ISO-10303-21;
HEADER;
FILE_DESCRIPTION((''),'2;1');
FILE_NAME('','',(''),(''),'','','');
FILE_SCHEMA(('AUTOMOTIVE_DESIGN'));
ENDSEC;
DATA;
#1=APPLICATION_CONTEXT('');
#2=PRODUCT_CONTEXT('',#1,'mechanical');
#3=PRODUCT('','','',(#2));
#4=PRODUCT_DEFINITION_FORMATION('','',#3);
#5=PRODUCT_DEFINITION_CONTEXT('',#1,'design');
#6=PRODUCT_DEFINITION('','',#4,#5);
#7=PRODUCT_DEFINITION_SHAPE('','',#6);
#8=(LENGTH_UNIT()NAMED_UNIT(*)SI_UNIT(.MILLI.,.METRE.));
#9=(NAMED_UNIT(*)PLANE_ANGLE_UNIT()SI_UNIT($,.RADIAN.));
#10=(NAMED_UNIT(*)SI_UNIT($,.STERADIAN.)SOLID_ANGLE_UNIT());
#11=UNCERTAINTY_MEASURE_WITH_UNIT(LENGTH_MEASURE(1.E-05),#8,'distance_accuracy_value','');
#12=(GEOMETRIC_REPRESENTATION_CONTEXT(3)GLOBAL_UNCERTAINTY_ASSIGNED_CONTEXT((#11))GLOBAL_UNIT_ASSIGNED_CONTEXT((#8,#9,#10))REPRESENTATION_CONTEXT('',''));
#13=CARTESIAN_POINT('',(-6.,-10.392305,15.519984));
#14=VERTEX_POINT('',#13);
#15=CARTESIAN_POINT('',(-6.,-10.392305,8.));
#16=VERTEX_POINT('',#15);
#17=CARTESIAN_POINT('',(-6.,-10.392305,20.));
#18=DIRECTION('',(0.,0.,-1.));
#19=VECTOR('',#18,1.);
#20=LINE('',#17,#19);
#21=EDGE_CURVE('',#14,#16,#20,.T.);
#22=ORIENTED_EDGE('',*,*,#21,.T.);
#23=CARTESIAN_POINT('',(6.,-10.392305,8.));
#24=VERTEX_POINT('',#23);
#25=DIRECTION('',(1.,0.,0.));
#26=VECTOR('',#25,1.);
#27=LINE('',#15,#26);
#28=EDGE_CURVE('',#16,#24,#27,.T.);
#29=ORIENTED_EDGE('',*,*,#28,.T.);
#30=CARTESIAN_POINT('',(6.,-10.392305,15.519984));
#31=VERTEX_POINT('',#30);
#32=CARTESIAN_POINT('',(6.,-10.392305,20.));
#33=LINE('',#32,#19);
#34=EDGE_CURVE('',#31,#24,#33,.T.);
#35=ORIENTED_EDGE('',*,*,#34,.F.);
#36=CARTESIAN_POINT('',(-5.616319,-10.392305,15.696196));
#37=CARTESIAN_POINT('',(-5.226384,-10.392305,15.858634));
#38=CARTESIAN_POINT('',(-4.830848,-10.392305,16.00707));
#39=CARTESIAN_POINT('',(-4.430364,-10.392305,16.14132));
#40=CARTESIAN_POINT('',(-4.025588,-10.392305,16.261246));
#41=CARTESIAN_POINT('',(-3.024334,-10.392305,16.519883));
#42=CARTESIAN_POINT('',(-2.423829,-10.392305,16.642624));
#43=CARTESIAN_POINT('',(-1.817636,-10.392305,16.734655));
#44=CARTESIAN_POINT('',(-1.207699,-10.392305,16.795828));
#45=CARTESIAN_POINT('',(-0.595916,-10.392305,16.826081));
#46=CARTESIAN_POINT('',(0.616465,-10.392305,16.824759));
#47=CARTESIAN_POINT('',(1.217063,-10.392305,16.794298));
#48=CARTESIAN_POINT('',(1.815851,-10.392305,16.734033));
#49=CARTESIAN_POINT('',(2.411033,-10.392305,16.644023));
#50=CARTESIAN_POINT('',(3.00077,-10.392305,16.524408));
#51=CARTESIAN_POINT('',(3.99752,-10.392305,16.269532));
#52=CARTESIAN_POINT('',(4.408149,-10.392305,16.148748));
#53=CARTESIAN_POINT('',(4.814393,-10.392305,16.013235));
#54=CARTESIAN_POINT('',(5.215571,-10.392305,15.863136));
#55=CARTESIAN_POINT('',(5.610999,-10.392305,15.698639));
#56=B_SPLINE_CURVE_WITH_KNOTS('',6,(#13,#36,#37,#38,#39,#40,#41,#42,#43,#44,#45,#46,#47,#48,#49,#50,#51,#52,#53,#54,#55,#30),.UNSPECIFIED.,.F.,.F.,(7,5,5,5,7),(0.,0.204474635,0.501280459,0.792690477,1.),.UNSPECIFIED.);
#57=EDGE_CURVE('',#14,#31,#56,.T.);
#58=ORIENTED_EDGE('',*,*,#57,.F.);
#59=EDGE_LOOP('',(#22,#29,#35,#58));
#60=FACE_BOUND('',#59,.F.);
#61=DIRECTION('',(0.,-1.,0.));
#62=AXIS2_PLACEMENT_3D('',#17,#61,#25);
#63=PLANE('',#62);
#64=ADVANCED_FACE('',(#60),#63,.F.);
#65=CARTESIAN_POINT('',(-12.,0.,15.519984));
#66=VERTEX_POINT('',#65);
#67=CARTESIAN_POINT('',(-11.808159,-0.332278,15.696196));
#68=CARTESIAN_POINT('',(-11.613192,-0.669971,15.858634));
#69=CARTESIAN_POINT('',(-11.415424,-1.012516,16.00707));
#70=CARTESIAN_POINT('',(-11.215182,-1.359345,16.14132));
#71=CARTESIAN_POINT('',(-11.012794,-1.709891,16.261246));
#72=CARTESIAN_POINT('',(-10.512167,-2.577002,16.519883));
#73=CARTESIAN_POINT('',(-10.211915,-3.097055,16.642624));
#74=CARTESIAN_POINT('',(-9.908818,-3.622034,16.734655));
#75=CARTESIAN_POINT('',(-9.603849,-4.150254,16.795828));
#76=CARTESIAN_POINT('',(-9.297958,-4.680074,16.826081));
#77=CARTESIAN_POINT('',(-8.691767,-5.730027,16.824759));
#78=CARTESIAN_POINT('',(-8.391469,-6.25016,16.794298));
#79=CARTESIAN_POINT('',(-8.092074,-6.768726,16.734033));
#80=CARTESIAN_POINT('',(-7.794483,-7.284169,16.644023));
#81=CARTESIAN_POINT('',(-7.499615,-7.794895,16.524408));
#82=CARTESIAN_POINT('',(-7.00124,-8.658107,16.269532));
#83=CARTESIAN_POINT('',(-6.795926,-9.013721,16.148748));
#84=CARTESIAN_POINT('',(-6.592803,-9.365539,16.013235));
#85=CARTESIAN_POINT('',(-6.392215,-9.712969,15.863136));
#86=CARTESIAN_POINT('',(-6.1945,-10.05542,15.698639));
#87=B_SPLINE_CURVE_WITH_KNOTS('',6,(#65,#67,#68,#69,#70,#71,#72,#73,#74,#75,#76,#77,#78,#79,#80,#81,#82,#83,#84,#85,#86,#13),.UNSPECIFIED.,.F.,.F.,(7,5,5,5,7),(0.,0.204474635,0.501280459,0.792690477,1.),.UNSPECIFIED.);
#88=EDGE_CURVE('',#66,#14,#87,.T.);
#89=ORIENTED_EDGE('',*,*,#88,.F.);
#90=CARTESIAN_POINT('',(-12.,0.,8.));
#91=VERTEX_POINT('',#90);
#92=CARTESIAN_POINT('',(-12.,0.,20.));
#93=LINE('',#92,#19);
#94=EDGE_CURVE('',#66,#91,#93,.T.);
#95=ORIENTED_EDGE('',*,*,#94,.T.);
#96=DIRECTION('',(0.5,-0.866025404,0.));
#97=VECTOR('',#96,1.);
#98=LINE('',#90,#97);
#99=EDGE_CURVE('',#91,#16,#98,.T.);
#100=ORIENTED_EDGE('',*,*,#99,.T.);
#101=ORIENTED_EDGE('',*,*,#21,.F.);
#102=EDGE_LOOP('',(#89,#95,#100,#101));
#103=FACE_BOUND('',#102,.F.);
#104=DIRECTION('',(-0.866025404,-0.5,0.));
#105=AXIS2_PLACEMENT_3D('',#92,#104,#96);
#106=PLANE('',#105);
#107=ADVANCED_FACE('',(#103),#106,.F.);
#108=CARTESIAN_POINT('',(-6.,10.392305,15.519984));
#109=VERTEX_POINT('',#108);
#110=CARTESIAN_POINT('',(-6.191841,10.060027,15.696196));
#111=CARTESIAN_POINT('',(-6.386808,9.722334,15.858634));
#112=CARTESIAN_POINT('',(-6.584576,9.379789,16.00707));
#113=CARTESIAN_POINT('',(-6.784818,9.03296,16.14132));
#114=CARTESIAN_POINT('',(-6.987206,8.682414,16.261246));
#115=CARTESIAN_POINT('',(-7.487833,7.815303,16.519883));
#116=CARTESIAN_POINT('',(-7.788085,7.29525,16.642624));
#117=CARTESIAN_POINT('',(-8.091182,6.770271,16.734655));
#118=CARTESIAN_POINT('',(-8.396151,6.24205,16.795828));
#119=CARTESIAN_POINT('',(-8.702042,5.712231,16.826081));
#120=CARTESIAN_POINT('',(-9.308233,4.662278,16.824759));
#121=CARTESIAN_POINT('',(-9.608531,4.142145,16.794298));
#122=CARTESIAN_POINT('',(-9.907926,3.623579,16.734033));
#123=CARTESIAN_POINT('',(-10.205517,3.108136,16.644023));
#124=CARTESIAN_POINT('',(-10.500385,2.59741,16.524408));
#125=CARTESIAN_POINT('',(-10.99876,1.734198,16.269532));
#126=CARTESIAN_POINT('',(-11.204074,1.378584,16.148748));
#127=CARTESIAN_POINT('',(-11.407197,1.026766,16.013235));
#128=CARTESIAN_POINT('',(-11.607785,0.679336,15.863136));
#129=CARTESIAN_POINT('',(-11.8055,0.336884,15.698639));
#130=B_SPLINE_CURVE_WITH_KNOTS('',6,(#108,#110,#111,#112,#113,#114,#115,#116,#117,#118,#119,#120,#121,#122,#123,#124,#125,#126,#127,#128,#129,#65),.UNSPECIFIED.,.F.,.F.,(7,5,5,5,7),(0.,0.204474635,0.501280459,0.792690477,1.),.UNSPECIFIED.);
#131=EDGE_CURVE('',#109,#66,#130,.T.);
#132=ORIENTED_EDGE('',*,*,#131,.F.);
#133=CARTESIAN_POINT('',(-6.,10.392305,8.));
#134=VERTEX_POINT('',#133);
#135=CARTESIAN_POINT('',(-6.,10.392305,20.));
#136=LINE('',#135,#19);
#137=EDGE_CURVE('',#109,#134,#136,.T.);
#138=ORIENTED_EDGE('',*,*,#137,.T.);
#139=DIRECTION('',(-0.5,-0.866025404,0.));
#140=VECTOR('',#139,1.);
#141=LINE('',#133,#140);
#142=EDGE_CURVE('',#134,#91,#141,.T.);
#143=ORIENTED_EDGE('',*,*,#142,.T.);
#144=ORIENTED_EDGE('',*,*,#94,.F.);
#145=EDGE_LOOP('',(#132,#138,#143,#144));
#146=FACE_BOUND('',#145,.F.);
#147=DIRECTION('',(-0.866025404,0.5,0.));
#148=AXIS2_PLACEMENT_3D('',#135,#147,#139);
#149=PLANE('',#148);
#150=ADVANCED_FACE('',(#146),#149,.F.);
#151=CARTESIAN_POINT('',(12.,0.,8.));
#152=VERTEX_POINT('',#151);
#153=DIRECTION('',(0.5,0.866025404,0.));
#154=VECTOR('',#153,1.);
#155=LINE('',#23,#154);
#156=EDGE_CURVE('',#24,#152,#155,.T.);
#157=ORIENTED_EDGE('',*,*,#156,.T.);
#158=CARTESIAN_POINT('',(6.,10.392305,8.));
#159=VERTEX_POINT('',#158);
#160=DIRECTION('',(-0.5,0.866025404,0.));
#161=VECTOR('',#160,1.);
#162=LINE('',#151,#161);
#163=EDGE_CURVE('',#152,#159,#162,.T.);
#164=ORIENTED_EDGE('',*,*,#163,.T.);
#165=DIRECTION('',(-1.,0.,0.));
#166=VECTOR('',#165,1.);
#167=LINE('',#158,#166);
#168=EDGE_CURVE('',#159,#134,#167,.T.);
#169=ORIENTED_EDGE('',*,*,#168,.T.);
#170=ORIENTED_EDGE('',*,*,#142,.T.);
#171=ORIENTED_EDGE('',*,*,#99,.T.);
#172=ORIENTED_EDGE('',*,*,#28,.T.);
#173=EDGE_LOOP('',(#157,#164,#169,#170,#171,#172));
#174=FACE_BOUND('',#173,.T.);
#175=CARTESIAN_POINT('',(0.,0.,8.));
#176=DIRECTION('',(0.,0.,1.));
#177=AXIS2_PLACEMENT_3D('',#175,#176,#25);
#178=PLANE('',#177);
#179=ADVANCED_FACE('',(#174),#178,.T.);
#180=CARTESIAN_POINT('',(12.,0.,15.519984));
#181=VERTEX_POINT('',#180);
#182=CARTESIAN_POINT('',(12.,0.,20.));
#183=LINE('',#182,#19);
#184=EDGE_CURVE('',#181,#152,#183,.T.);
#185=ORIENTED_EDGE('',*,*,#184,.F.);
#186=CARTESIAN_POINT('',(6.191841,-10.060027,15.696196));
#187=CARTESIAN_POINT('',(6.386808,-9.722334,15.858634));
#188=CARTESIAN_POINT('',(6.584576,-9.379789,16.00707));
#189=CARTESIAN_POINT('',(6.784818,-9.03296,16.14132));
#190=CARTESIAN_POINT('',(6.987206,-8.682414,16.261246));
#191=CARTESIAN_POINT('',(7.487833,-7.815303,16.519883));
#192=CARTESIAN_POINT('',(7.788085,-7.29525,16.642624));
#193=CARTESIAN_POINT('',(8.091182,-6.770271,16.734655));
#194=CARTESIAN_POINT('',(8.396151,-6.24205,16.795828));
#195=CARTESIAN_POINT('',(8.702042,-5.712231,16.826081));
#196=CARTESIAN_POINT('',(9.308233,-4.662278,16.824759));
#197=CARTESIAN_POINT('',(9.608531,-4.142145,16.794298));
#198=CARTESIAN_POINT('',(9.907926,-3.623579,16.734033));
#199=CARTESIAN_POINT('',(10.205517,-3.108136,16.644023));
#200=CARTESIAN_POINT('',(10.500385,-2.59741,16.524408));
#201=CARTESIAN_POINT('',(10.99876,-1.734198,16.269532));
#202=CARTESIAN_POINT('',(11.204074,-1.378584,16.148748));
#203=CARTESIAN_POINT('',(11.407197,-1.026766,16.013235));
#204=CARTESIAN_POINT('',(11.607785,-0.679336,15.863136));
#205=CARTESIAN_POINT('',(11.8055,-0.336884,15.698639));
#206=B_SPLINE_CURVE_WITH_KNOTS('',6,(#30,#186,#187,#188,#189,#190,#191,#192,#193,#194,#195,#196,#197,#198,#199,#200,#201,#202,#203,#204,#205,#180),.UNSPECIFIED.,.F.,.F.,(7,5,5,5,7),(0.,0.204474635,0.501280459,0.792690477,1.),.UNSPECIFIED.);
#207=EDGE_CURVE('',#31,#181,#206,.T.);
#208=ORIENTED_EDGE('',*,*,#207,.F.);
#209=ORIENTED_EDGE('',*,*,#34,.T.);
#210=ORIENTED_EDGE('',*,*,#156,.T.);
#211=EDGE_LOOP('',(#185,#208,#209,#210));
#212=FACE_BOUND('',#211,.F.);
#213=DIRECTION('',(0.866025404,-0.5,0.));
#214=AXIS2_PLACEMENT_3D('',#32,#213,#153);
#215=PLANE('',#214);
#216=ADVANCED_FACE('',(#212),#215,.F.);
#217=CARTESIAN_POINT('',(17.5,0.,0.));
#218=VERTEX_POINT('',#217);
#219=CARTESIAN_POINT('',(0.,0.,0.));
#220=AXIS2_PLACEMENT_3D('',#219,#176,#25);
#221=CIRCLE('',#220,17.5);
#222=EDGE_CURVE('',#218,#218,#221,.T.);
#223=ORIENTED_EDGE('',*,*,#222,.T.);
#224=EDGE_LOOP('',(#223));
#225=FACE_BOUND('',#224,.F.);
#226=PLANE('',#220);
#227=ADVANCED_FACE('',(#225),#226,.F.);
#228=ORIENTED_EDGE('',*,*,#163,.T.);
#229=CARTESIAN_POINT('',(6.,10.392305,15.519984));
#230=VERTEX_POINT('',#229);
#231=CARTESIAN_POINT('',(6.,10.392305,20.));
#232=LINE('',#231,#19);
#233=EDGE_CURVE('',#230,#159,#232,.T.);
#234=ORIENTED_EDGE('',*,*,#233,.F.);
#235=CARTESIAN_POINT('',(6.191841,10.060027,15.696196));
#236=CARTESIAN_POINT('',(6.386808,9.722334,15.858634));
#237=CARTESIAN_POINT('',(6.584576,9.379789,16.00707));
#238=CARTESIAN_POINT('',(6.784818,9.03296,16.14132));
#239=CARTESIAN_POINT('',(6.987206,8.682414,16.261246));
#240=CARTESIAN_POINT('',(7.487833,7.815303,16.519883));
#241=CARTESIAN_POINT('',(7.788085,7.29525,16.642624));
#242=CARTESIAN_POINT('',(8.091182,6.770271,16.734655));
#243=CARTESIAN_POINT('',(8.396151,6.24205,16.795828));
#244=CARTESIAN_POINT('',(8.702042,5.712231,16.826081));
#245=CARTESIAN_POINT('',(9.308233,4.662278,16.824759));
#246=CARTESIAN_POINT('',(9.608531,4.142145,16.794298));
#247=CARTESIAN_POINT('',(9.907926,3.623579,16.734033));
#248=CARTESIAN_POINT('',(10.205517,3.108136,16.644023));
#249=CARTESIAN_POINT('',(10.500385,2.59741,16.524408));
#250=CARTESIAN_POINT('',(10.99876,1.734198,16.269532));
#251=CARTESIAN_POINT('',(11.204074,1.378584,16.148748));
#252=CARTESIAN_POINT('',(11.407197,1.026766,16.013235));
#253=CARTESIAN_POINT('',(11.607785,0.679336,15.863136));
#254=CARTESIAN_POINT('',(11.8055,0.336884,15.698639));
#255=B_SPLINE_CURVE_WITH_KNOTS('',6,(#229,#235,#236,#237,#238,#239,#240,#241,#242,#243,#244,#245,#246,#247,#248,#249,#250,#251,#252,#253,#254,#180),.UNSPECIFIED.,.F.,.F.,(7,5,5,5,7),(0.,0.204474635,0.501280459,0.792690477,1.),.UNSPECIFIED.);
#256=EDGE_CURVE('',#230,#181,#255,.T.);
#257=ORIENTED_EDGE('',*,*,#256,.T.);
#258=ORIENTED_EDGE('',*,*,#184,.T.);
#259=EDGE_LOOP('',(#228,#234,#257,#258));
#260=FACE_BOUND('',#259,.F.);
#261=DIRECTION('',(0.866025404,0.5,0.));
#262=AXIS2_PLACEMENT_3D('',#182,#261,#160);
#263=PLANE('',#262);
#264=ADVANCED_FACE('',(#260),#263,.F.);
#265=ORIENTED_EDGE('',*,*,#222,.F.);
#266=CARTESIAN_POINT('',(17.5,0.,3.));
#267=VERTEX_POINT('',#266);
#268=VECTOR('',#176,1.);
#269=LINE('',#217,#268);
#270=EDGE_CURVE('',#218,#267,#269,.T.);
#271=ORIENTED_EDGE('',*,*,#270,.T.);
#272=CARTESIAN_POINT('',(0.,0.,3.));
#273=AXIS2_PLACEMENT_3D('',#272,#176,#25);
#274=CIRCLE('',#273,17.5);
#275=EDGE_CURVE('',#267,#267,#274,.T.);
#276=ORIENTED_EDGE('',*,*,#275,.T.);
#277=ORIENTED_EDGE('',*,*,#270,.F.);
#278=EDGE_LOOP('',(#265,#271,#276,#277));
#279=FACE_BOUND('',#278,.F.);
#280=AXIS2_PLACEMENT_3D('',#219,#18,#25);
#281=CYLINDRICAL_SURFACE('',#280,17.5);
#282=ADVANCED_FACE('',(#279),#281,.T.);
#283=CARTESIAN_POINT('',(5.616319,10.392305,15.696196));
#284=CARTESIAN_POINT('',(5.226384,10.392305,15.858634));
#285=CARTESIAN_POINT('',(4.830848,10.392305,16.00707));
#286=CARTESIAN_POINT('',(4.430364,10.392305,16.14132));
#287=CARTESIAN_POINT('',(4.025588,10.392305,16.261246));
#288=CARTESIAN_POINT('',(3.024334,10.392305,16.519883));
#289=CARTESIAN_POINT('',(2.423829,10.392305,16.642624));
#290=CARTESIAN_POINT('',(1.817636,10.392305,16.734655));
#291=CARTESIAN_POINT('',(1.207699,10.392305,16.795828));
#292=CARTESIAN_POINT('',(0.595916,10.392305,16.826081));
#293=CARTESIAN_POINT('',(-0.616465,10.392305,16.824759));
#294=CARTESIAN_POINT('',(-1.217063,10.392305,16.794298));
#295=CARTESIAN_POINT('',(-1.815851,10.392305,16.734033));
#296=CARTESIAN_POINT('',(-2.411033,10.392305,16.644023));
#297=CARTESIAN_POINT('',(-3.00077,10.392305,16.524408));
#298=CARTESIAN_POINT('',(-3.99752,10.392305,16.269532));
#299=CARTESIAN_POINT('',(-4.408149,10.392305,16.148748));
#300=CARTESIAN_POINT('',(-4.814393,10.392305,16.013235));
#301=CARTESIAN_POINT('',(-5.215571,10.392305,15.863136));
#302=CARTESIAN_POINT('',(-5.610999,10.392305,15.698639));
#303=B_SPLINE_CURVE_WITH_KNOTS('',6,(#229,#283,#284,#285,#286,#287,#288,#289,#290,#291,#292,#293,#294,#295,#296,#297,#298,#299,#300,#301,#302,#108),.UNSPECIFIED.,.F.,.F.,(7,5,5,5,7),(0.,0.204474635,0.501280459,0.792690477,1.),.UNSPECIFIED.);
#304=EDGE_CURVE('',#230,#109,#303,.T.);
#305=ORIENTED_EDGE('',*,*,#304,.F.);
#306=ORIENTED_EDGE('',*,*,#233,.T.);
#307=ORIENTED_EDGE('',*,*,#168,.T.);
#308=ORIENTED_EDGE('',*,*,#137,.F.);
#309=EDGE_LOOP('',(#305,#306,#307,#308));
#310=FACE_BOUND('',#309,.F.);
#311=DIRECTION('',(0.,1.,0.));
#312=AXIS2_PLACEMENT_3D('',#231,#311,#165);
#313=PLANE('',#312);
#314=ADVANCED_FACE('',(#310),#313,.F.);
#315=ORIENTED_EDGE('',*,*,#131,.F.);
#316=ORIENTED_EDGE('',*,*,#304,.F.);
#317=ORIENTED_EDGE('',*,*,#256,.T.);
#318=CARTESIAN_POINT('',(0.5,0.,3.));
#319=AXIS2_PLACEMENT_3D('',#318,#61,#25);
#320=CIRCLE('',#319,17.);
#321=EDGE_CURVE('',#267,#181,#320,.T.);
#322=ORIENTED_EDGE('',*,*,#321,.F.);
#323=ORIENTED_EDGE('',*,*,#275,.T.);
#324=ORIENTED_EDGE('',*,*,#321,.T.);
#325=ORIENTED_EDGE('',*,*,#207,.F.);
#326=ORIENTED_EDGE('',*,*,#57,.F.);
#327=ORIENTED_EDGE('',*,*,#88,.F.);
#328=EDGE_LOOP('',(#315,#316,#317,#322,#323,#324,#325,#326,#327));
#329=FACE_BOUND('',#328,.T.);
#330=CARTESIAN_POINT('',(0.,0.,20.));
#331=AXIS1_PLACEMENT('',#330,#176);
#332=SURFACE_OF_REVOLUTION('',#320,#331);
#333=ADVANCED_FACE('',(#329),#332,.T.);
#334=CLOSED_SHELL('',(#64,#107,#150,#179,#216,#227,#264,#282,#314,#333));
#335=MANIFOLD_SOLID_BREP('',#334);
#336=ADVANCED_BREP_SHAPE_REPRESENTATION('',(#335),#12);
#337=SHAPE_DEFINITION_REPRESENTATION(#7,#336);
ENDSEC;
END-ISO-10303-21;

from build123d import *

# Parameters (mm, degrees)
F0_R     = 17.5
F1_DEPTH = 20
F3_DEPTH = 12


# Not quite as in the source:
# - a fillet or chamfer that OpenCascade refuses, or shapes differently, is made with other operations: its cross-section is extruded or revolved along the edge and cut away or added


with BuildPart() as f1:
    # F0 (on Top) → F1 (new body)
    with BuildSketch(Plane.XY):
        Circle(F0_R)
    extrude(amount=F1_DEPTH)

    # F2 (on face) → F3 (cut)
    with BuildSketch(Plane.XY.offset(20)):
        Polygon((6, 10.3923048454), (-6, 10.3923048454), (-12, 0), (-6, -10.3923048454), (6, -10.3923048454), (12, 0), align=None)
    extrude(amount=-F3_DEPTH, mode=Mode.SUBTRACT)

    # F4: fillet of radius 17 on 1 edges, made by hand

    # F4_s1 → F4_t2 (revolve, cut)
    with BuildSketch(Plane.XZ):
        with BuildLine():
            ThreePointArc((17.5, 3), (12.5208152802, 15.0208152802), (0.5, 20))
            Line((0.5, 20), (17.5, 20))
            Line((17.5, 20), (17.5, 3))
        make_face()
    revolve(axis=Axis((0, 0, 20), (0, 0, 1)), mode=Mode.SUBTRACT)


solid = f1.part
